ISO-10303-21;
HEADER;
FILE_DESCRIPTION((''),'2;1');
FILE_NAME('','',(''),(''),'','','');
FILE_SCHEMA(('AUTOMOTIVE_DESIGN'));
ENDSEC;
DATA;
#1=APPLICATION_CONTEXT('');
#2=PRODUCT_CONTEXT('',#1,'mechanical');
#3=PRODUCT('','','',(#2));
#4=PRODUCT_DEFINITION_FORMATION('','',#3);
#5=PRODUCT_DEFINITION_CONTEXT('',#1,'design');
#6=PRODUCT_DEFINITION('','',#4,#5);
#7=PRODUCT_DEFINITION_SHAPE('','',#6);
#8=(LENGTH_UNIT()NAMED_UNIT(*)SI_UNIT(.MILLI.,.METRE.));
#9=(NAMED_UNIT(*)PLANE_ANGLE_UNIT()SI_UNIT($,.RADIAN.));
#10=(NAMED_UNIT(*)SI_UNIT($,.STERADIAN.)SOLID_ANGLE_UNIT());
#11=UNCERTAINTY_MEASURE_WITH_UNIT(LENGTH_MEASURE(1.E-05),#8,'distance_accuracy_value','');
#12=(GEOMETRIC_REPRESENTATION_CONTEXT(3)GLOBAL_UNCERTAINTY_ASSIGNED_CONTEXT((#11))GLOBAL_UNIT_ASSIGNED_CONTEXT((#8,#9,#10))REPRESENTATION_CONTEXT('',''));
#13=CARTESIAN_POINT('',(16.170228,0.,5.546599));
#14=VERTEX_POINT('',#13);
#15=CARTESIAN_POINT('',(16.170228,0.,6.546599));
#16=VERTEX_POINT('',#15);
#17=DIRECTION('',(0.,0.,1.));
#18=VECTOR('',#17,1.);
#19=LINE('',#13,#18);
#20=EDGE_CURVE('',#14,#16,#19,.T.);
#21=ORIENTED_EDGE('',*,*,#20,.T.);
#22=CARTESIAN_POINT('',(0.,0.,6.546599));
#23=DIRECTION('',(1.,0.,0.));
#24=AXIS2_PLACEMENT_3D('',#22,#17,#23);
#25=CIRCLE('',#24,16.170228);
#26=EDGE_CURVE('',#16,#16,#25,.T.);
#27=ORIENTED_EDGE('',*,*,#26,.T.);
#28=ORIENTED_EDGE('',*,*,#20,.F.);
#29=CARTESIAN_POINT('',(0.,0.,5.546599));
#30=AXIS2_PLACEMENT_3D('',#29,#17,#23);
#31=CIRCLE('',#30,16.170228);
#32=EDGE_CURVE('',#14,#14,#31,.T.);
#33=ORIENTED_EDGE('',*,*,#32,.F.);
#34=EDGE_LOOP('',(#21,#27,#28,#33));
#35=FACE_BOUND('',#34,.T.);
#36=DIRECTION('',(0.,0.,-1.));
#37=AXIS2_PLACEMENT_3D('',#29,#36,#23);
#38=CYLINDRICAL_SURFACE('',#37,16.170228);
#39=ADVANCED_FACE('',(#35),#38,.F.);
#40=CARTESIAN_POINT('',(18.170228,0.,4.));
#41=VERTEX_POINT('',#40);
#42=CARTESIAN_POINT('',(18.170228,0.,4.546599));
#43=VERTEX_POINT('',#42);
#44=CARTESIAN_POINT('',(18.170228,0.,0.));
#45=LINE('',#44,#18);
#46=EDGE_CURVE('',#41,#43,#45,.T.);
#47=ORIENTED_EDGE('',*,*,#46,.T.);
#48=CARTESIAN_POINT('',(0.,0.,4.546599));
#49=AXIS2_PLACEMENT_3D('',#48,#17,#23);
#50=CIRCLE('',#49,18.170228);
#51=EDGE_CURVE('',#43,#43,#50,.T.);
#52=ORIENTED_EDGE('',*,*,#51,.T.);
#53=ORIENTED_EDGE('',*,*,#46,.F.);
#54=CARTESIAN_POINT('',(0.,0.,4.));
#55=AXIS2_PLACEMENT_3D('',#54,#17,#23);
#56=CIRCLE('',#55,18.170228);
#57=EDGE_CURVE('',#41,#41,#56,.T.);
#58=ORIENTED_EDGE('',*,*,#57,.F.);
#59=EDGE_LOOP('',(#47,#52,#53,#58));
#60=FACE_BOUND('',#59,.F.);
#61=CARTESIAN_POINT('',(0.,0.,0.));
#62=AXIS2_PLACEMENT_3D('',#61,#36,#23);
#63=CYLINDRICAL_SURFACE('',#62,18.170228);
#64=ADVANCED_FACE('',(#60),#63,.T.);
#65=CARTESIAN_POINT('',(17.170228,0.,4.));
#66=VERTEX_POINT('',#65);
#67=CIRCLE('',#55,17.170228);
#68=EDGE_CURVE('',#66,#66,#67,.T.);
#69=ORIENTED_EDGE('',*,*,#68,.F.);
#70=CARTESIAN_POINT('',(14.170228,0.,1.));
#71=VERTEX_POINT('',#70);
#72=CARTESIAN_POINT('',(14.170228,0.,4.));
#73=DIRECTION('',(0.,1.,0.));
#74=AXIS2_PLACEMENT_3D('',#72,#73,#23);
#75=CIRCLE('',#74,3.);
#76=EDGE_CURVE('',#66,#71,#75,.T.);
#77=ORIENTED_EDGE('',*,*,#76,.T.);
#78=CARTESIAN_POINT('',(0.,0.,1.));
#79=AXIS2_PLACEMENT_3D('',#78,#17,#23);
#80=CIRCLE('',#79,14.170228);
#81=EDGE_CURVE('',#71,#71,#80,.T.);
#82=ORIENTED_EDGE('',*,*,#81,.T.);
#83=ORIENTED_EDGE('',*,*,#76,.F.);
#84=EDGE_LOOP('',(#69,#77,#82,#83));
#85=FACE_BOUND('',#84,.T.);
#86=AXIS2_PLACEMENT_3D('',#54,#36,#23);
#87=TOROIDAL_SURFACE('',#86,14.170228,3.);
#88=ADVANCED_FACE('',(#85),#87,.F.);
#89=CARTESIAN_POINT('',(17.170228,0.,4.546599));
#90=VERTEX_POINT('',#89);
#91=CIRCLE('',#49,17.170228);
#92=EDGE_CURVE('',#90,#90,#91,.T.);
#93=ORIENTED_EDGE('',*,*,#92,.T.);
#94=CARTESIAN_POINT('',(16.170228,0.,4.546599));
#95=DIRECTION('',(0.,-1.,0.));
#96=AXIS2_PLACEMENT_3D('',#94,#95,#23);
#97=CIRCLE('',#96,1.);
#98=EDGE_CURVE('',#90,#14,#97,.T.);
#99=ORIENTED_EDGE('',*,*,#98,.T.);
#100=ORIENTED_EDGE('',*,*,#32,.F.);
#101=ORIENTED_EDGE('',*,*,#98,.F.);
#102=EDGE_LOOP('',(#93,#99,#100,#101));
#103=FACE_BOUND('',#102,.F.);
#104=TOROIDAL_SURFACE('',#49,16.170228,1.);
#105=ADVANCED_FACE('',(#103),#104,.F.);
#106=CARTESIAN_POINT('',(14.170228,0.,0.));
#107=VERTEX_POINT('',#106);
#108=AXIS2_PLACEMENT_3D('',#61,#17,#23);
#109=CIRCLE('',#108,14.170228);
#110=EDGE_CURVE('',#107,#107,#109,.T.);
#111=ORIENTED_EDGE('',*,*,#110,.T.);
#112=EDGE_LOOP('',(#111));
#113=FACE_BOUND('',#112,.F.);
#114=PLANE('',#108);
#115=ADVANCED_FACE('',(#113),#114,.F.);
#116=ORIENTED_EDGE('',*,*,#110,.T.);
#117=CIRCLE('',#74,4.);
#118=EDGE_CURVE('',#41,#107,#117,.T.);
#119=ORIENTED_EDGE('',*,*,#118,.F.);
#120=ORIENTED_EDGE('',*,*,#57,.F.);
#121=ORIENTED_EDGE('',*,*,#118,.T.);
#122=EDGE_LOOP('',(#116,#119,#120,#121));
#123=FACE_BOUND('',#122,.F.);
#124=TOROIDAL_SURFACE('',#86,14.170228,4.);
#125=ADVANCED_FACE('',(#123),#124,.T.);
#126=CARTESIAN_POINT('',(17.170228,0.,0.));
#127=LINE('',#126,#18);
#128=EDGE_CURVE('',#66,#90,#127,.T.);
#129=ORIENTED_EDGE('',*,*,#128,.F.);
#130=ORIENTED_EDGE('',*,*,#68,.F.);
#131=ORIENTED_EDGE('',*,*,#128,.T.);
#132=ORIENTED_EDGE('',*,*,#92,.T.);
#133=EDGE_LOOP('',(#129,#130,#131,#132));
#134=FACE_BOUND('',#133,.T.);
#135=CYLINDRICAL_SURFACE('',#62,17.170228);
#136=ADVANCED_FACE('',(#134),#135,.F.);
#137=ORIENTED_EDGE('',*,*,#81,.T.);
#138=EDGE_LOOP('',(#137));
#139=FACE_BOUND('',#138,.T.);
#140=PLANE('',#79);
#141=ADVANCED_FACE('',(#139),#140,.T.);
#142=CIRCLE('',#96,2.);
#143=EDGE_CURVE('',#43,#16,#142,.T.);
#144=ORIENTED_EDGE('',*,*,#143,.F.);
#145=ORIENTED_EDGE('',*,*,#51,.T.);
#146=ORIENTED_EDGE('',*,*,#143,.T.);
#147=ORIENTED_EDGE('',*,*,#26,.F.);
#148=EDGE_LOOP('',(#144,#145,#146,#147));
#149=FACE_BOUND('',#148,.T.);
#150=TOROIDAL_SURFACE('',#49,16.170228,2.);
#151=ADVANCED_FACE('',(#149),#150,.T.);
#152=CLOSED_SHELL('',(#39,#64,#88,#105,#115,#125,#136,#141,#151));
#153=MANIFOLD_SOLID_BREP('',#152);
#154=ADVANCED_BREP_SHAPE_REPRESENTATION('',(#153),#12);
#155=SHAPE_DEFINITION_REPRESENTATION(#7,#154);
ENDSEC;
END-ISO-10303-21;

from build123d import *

# Parameters (mm, degrees)
F0_R     = 18.1702284577
F1_DEPTH = 6.5465988591
F2_R     = 4
F3_R     = 2
F4_T     = -1


# Not quite as in the source:
# - a shell that OpenCascade refuses in one call is made with other operations: the cavity is built on its own and cut out


with BuildPart() as f1:
    # F0 (on Top) → F1 (new body)
    with BuildSketch(Plane.XY):
        Circle(F0_R)
    extrude(amount=F1_DEPTH)

    # F2
    f2_edges = [f1.edges().sort_by_distance(p)[0] for p in [
        (-18.170228, 0, 0),
    ]]
    fillet(f2_edges, radius=F2_R)

    # F3
    f3_edges = [f1.edges().sort_by_distance(p)[0] for p in [
        (-18.170228, 0, 6.546599),
    ]]
    fillet(f3_edges, radius=F3_R)

    # F4: a shell. OpenCascade refuses it in one call, so the cavity is built on its own and cut out:
    # the body offset inwards by the wall thickness, plus a prism from it out through each open face.
    f4_core = offset(f1.part, amount=F4_T, mode=Mode.PRIVATE)
    f4_exits = [f4_core.faces().sort_by_distance(p)[0] for p in [
        (0, 0, 5.546599),
    ]]
    add(f4_core, mode=Mode.SUBTRACT)
    extrude(f4_exits, amount=-F4_T, mode=Mode.SUBTRACT)


solid = f1.part
